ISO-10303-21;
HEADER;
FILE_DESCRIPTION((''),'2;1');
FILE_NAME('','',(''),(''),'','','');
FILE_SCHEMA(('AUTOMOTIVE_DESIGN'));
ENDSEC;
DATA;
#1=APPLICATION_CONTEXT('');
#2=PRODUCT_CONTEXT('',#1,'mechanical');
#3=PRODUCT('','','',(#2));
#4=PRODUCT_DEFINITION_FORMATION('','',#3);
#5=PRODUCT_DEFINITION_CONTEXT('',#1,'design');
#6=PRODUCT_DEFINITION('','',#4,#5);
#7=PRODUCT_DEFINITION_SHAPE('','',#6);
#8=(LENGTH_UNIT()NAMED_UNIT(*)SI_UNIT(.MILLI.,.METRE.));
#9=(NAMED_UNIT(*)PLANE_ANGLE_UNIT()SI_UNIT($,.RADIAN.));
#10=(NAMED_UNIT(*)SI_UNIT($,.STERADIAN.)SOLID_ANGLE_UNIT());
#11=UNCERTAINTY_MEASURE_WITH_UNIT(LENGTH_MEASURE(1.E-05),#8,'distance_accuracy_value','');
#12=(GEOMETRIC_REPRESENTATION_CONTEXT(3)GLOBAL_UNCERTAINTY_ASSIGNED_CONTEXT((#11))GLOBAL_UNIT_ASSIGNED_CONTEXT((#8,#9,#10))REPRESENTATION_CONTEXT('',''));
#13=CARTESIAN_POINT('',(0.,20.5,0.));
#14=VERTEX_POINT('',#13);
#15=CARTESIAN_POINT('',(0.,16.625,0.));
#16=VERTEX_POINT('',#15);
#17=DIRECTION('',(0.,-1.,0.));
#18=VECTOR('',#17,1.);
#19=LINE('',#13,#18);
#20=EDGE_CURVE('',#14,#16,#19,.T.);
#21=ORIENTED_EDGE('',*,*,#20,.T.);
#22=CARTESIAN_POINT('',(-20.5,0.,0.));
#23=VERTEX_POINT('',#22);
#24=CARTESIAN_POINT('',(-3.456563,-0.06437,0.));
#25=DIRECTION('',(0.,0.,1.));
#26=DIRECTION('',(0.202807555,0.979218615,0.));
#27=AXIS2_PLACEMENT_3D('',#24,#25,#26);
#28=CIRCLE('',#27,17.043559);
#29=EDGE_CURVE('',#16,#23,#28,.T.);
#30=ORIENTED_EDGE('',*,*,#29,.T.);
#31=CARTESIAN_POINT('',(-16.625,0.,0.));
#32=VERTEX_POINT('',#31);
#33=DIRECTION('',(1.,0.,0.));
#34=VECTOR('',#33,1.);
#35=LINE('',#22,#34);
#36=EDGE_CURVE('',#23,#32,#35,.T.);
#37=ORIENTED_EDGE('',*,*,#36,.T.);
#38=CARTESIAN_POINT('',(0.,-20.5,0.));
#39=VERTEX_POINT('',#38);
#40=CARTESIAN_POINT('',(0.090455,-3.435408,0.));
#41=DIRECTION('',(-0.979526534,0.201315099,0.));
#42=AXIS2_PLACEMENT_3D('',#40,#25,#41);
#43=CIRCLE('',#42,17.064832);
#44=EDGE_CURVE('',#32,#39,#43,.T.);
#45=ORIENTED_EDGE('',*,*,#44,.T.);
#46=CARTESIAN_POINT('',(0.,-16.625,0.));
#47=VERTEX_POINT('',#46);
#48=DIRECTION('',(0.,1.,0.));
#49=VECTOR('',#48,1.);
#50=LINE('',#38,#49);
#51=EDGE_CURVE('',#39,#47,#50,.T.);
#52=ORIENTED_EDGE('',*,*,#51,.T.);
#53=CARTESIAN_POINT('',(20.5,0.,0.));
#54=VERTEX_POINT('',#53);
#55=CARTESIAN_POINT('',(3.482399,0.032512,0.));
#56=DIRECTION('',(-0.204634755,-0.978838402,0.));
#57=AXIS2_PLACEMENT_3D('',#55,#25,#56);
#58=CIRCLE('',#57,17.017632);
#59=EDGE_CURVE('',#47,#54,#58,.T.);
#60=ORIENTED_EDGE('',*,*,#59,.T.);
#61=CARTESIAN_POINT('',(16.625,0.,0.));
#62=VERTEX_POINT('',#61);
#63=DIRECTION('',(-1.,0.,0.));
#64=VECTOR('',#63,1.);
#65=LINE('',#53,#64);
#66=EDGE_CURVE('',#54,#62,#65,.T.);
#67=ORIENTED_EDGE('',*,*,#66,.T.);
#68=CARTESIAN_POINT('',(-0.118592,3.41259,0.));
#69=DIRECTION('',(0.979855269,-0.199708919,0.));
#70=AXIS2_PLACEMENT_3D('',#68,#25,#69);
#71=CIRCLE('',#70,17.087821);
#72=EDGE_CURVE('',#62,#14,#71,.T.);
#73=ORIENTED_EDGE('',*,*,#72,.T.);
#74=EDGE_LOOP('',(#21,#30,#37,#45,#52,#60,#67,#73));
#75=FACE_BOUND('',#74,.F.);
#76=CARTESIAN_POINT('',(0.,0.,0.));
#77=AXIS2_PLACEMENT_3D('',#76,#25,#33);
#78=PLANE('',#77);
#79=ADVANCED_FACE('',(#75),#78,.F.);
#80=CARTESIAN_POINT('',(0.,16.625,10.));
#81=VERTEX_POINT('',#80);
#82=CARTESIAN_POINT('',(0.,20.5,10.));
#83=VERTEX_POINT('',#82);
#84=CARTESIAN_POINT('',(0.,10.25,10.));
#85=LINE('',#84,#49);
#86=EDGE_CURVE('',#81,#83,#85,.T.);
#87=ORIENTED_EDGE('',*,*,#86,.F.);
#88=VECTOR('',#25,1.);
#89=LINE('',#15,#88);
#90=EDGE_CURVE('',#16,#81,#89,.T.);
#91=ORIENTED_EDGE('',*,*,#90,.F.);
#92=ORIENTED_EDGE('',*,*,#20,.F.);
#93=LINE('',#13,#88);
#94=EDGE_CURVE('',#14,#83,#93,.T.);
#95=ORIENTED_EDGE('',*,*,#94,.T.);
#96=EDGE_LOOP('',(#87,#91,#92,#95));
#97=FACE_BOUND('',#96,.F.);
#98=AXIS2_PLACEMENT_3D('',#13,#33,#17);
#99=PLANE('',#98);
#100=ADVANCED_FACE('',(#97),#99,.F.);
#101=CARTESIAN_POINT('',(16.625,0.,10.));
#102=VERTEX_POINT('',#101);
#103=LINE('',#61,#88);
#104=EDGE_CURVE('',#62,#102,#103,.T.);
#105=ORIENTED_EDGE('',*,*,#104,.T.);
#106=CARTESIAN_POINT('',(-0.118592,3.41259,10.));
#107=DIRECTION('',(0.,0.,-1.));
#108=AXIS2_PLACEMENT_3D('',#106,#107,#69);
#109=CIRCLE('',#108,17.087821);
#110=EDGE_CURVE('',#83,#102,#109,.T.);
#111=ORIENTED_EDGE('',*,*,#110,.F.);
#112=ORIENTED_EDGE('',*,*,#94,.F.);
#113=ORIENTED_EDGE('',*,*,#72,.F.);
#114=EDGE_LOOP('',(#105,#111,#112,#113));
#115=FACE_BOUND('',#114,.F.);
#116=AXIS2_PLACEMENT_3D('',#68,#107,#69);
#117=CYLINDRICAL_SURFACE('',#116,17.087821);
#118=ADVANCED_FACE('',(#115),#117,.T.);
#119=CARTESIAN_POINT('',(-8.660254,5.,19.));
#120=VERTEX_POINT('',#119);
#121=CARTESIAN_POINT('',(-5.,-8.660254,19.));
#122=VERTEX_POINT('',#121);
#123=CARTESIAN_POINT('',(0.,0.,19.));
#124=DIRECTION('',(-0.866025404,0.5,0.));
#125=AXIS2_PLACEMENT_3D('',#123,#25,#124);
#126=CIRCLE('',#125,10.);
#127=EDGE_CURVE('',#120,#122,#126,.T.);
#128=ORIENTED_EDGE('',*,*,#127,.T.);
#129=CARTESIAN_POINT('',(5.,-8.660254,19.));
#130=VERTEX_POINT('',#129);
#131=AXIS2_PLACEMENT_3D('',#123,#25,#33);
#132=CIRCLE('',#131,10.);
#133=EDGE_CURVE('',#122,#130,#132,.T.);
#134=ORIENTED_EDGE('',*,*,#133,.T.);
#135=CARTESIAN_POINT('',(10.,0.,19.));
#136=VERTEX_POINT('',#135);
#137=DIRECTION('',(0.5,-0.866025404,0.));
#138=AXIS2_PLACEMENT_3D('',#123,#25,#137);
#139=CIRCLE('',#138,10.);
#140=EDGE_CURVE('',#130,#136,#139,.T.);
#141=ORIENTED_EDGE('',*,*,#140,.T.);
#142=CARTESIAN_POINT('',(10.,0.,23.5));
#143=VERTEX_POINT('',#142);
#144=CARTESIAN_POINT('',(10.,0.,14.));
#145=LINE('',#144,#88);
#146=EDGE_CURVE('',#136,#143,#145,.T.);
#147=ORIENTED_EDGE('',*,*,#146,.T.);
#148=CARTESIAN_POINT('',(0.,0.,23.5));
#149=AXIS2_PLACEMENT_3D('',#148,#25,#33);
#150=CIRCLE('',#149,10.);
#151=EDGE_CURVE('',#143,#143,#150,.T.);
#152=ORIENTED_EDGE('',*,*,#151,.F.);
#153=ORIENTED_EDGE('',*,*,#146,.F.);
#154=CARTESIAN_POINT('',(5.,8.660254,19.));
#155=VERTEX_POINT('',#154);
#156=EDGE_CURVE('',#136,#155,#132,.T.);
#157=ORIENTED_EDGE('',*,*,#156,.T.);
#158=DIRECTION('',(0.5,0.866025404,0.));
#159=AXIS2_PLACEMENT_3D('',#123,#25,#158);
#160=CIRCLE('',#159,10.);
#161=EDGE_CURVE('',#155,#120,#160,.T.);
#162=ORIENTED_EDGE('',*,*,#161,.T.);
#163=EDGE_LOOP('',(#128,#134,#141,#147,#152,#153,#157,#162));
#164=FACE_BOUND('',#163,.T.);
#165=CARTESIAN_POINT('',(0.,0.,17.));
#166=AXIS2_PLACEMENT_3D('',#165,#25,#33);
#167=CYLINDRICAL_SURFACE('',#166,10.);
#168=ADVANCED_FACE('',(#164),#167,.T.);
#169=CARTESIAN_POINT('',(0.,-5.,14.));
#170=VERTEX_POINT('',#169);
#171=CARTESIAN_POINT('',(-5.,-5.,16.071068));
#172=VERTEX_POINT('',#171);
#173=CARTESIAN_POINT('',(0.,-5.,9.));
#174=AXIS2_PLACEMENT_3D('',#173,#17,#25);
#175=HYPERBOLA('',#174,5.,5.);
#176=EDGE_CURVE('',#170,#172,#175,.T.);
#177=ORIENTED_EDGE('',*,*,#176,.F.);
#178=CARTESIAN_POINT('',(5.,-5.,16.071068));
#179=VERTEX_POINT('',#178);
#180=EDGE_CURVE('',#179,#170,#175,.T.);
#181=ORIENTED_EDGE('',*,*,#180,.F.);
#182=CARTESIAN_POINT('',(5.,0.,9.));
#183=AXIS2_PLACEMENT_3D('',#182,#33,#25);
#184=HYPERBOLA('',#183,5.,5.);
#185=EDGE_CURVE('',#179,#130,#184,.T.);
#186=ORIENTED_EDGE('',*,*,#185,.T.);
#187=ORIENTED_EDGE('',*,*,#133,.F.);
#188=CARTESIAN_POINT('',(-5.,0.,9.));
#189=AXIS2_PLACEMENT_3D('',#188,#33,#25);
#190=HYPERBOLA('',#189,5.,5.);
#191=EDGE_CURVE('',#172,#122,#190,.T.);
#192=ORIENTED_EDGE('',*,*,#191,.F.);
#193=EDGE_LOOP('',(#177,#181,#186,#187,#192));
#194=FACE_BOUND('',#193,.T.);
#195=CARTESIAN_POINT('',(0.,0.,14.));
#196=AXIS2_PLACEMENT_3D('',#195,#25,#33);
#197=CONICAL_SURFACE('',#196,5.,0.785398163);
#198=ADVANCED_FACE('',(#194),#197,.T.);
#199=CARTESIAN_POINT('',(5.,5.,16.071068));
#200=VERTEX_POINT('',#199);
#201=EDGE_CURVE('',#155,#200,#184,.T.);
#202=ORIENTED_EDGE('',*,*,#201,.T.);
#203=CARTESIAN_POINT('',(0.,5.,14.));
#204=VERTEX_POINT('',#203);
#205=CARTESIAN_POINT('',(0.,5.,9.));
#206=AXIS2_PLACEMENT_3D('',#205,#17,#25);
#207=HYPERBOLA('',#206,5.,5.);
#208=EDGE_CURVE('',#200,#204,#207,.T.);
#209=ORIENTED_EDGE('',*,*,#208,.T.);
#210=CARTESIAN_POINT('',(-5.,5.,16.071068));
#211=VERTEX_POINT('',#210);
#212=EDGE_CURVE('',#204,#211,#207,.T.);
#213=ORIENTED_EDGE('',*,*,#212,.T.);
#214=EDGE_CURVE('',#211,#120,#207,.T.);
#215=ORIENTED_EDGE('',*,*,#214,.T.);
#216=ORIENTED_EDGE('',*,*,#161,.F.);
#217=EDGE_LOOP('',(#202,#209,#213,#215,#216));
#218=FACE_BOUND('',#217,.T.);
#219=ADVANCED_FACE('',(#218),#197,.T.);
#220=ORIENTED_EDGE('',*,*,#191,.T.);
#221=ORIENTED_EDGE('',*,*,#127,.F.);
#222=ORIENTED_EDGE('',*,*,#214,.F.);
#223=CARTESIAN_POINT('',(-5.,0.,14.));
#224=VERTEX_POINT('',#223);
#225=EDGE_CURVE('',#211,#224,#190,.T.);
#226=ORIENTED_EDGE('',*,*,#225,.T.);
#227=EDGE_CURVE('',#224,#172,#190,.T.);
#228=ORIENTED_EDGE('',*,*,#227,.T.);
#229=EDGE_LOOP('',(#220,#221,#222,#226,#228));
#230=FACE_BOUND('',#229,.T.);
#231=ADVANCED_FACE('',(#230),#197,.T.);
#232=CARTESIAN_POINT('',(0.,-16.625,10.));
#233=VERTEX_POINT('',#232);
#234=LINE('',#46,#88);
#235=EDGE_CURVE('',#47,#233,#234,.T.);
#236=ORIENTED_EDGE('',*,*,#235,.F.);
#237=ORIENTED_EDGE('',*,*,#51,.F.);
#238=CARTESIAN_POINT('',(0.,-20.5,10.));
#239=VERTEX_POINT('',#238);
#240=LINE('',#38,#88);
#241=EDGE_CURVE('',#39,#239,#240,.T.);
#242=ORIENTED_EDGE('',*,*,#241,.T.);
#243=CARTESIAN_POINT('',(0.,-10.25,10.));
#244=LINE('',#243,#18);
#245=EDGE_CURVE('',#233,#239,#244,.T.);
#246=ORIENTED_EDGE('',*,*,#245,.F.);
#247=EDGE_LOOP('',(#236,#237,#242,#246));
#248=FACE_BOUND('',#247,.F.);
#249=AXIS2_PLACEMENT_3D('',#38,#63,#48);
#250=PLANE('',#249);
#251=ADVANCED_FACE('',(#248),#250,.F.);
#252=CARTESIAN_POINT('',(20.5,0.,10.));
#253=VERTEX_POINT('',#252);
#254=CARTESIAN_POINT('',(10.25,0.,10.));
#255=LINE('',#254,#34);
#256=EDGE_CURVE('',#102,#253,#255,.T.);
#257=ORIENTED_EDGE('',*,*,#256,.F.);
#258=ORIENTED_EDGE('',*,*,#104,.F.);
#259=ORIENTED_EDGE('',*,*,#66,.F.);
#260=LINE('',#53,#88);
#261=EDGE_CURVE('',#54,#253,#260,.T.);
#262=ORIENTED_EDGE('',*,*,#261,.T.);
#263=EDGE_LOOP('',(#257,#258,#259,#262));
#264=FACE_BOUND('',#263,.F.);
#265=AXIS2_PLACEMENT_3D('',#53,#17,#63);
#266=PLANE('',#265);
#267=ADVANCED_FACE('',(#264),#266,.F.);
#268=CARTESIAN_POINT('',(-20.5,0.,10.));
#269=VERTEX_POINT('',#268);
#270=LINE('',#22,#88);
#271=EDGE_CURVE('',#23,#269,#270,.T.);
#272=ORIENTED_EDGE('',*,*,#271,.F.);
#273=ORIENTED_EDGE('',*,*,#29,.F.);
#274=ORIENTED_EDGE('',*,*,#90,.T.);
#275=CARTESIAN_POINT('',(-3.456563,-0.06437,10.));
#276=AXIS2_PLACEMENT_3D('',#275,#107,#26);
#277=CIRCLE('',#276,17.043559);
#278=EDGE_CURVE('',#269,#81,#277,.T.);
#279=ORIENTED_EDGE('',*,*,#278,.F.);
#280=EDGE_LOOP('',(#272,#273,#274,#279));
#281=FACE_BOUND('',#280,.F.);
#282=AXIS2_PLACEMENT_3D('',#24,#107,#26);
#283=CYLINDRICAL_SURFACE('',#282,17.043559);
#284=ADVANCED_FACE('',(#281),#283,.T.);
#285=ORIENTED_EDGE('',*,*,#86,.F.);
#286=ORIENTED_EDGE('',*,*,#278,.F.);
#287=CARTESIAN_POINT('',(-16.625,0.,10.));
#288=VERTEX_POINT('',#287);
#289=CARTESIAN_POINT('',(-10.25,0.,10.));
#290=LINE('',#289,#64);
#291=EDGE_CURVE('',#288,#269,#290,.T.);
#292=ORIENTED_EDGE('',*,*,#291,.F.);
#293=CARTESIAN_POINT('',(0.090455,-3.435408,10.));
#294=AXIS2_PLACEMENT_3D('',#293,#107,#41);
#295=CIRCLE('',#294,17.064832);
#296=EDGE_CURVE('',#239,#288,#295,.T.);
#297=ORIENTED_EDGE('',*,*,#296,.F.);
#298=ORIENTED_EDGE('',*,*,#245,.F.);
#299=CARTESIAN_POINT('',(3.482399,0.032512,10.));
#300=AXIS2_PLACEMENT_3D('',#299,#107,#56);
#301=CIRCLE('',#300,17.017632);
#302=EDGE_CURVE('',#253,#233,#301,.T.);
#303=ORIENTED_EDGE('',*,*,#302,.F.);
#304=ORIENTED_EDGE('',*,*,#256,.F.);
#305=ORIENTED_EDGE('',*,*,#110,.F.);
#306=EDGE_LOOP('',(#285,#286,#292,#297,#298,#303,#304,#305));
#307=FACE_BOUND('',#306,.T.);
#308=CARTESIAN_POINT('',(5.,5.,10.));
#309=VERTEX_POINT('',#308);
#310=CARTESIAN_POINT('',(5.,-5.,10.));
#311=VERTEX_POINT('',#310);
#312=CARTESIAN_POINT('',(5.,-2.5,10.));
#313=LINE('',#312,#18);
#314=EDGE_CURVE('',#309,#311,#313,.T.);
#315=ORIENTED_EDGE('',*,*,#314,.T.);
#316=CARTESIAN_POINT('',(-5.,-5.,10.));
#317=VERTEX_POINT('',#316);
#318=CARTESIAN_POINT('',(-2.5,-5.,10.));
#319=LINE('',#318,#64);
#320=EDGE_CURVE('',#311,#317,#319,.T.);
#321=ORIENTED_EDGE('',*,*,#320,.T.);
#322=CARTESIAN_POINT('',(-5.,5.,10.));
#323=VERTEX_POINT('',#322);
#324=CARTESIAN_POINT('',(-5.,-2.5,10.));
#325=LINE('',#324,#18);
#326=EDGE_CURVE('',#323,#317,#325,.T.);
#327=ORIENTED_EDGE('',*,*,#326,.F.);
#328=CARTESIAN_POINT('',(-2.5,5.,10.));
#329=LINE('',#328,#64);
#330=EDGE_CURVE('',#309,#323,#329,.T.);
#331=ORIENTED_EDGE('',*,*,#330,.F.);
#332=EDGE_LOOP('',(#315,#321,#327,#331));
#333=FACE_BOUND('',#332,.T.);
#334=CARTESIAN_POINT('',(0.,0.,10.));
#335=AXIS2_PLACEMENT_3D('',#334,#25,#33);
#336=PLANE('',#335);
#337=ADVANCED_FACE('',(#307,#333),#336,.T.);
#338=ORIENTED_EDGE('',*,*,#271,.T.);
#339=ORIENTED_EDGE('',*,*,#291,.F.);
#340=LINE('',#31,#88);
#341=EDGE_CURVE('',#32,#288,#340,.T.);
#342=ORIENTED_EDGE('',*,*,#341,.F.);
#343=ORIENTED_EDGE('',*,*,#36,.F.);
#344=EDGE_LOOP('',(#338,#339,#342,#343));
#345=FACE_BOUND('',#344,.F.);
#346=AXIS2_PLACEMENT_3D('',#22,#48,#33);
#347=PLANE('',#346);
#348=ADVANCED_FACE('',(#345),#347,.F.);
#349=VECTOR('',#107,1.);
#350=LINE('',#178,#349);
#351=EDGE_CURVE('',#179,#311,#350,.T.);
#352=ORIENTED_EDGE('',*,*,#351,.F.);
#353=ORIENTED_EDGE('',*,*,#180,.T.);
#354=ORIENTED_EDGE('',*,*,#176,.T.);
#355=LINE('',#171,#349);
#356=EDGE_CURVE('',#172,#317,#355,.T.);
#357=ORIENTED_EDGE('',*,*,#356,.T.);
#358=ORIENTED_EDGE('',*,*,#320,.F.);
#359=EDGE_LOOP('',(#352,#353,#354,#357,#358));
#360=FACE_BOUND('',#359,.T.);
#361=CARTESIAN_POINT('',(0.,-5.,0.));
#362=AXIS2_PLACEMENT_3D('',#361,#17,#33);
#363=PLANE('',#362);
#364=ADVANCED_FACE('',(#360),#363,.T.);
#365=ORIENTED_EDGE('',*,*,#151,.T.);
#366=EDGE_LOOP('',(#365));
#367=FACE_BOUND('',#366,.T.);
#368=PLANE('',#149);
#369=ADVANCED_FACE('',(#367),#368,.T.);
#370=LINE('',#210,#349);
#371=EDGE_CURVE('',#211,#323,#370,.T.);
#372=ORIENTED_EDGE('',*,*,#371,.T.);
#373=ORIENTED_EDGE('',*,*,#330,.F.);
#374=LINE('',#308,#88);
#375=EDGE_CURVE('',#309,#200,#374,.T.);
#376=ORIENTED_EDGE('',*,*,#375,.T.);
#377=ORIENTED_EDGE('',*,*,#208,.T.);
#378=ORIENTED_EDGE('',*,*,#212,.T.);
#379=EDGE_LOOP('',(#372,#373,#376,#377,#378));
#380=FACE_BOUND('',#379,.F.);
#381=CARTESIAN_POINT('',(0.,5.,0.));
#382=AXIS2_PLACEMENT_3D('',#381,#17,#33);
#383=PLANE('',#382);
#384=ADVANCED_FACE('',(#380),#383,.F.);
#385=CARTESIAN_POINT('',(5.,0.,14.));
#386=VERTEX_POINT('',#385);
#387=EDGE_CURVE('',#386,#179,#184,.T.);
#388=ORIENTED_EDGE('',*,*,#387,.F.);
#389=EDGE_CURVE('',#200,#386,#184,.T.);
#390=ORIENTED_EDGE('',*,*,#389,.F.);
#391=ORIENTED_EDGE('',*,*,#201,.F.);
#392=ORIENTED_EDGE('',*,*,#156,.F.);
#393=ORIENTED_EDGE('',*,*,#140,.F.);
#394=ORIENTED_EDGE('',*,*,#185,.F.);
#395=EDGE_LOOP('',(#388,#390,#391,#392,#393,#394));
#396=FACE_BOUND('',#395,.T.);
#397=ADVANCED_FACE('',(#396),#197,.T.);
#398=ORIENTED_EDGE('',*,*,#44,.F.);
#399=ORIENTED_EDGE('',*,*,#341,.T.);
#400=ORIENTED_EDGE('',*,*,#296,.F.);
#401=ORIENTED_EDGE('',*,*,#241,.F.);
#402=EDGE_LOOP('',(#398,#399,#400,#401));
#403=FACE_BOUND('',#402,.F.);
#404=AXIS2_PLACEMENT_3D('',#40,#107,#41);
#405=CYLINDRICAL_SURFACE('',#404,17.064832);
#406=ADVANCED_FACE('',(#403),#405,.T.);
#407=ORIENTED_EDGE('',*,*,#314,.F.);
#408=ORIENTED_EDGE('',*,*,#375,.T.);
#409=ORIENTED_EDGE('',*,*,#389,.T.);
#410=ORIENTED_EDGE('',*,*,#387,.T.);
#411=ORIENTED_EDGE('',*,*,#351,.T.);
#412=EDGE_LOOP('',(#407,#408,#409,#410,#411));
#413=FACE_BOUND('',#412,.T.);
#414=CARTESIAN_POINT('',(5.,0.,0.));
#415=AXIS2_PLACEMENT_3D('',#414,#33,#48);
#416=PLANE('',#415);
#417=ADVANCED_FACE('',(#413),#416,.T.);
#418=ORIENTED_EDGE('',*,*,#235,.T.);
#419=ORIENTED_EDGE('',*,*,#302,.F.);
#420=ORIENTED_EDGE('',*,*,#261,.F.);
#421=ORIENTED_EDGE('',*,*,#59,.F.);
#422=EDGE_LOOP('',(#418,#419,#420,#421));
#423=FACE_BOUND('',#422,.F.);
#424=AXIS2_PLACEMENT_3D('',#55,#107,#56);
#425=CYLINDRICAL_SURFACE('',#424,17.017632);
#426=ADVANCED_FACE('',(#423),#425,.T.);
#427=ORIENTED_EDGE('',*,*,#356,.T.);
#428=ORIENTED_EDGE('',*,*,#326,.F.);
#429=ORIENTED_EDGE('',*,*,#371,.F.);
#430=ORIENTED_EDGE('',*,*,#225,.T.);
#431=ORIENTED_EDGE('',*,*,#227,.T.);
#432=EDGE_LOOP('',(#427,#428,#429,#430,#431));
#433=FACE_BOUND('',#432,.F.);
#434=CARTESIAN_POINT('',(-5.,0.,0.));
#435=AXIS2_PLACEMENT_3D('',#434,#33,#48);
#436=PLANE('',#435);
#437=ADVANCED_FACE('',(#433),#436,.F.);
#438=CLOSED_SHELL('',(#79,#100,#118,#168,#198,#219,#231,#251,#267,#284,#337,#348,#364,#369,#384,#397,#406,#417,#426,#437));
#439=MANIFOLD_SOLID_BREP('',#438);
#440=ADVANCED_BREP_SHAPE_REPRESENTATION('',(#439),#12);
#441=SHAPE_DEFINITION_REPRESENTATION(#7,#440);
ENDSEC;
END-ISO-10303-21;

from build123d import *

# Parameters (mm, degrees)
F0_W     = 41
F0_H     = 41
F0_W_2   = 10
F0_H_2   = 10
F1_DEPTH = 10
F2_DEPTH = 25
F3_R     = 10
F4_DEPTH = 8
F6_DEPTH = 25
F7_DEPTH = 1.5
F8_DEPTH = 3


# Not quite as in the source:
# - a fillet or chamfer that OpenCascade refuses, or shapes differently, is made with other operations: its cross-section is extruded or revolved along the edge and cut away or added


with BuildPart() as f1:
    # F0 (on Top) → F1 (new body)
    with BuildSketch(Plane.XY):
        Rectangle(F0_W, F0_H)
        Rectangle(F0_W_2, F0_H_2, mode=Mode.SUBTRACT)
        Rectangle(F0_W_2, F0_H_2)
    extrude(amount=F1_DEPTH)

    # F0 (on Top) → F2 (join)
    with BuildSketch(Plane.XY):
        Rectangle(F0_W_2, F0_H_2)
    extrude(amount=F2_DEPTH)

    # F3 (on face) → F4 (join)
    with BuildSketch(Plane.XY.offset(25)):
        Circle(F3_R)
    extrude(amount=-F4_DEPTH)

    # F5 (on face) → F6 (cut)
    with BuildSketch(Plane(origin=(0, 0, 0), x_dir=(1, 0, 0), z_dir=(0, 0, -1))):
        with BuildLine():
            Line((0, 20.5), (0, 16.625))
            ThreePointArc((0, 16.625), (14.2014511666, 13.1849661001), (20.5, 0))
            Line((20.5, 0), (20.5, 20.5))
            Line((20.5, 20.5), (0, 20.5))
        make_face()
        with BuildLine():
            Line((20.5, -20.5), (20.5, 0))
            Line((20.5, 0), (16.625, 0))
            ThreePointArc((16.625, 0), (13.15340166, -14.1758531755), (0, -20.5))
            Line((0, -20.5), (20.5, -20.5))
        make_face()
        with BuildLine():
            ThreePointArc((0, -16.625), (-14.1919455674, -13.1732449101), (-20.5, 0))
            Line((-20.5, 0), (-20.5, -20.5))
            Line((-20.5, -20.5), (0, -20.5))
            Line((0, -20.5), (0, -16.625))
        make_face()
        with BuildLine():
            ThreePointArc((-16.625, 0), (-13.1636820987, 14.1841903605), (0, 20.5))
            Line((0, 20.5), (-20.5, 20.5))
            Line((-20.5, 20.5), (-20.5, 0))
            Line((-20.5, 0), (-16.625, 0))
        make_face()
    extrude(amount=-F6_DEPTH, mode=Mode.SUBTRACT)

    # F7 (cut): a face of the model
    f7_faces = [f1.faces().sort_by_distance(p)[0] for p in [
        (0, 0, 25),
    ]]
    extrude(f7_faces, amount=-F7_DEPTH, mode=Mode.SUBTRACT)

    # F8 (add): a face of the model
    f8_faces = [f1.faces().sort_by_distance(p)[0] for p in [
        (-9.7171572875, 0, 17),
    ]]
    extrude(f8_faces, amount=F8_DEPTH)

    # F9: chamfer of 5 on 1 edges, made by hand


with BuildPart() as f9_tool2:
    # F9_s3 → F9_t4 (revolve)
    with BuildSketch(Plane.XZ):
        Polygon((5, 14), (10, 19), (10, 14), align=None)
    revolve(axis=Axis((0, 0, 14), (0, 0, 1)))

    split(bisect_by=Plane.YZ.offset(5), keep=Keep.TOP)


with BuildPart() as f1_1:
    add(f1.part)

    # F9_t1: cut F9_tool2
    add(f9_tool2.part, mode=Mode.SUBTRACT)


with BuildPart() as f9_tool7:
    # F9_s8 → F9_t9 (revolve)
    with BuildSketch(Plane.XZ):
        Polygon((5, 14), (10, 19), (10, 14), align=None)
    revolve(axis=Axis((0, 0, 14), (0, 0, 1)))

    split(bisect_by=Plane.XZ.offset(-5), keep=Keep.BOTTOM)


with BuildPart() as f1_2:
    add(f1_1.part)

    # F9_t6: cut F9_tool7
    add(f9_tool7.part, mode=Mode.SUBTRACT)


with BuildPart() as f9_tool12:
    # F9_s13 → F9_t14 (revolve)
    with BuildSketch(Plane.XZ):
        Polygon((5, 14), (10, 19), (10, 14), align=None)
    revolve(axis=Axis((0, 0, 14), (0, 0, 1)))

    split(bisect_by=Plane.YZ.offset(-5), keep=Keep.BOTTOM)


with BuildPart() as f1_3:
    add(f1_2.part)

    # F9_t11: cut F9_tool12
    add(f9_tool12.part, mode=Mode.SUBTRACT)


with BuildPart() as f9_tool17:
    # F9_s18 → F9_t19 (revolve)
    with BuildSketch(Plane.XZ):
        Polygon((5, 14), (10, 19), (10, 14), align=None)
    revolve(axis=Axis((0, 0, 14), (0, 0, 1)))

    split(bisect_by=Plane.XZ.offset(5), keep=Keep.TOP)


with BuildPart() as f1_4:
    add(f1_3.part)

    # F9_t16: cut F9_tool17
    add(f9_tool17.part, mode=Mode.SUBTRACT)


solid = f1_4.part
